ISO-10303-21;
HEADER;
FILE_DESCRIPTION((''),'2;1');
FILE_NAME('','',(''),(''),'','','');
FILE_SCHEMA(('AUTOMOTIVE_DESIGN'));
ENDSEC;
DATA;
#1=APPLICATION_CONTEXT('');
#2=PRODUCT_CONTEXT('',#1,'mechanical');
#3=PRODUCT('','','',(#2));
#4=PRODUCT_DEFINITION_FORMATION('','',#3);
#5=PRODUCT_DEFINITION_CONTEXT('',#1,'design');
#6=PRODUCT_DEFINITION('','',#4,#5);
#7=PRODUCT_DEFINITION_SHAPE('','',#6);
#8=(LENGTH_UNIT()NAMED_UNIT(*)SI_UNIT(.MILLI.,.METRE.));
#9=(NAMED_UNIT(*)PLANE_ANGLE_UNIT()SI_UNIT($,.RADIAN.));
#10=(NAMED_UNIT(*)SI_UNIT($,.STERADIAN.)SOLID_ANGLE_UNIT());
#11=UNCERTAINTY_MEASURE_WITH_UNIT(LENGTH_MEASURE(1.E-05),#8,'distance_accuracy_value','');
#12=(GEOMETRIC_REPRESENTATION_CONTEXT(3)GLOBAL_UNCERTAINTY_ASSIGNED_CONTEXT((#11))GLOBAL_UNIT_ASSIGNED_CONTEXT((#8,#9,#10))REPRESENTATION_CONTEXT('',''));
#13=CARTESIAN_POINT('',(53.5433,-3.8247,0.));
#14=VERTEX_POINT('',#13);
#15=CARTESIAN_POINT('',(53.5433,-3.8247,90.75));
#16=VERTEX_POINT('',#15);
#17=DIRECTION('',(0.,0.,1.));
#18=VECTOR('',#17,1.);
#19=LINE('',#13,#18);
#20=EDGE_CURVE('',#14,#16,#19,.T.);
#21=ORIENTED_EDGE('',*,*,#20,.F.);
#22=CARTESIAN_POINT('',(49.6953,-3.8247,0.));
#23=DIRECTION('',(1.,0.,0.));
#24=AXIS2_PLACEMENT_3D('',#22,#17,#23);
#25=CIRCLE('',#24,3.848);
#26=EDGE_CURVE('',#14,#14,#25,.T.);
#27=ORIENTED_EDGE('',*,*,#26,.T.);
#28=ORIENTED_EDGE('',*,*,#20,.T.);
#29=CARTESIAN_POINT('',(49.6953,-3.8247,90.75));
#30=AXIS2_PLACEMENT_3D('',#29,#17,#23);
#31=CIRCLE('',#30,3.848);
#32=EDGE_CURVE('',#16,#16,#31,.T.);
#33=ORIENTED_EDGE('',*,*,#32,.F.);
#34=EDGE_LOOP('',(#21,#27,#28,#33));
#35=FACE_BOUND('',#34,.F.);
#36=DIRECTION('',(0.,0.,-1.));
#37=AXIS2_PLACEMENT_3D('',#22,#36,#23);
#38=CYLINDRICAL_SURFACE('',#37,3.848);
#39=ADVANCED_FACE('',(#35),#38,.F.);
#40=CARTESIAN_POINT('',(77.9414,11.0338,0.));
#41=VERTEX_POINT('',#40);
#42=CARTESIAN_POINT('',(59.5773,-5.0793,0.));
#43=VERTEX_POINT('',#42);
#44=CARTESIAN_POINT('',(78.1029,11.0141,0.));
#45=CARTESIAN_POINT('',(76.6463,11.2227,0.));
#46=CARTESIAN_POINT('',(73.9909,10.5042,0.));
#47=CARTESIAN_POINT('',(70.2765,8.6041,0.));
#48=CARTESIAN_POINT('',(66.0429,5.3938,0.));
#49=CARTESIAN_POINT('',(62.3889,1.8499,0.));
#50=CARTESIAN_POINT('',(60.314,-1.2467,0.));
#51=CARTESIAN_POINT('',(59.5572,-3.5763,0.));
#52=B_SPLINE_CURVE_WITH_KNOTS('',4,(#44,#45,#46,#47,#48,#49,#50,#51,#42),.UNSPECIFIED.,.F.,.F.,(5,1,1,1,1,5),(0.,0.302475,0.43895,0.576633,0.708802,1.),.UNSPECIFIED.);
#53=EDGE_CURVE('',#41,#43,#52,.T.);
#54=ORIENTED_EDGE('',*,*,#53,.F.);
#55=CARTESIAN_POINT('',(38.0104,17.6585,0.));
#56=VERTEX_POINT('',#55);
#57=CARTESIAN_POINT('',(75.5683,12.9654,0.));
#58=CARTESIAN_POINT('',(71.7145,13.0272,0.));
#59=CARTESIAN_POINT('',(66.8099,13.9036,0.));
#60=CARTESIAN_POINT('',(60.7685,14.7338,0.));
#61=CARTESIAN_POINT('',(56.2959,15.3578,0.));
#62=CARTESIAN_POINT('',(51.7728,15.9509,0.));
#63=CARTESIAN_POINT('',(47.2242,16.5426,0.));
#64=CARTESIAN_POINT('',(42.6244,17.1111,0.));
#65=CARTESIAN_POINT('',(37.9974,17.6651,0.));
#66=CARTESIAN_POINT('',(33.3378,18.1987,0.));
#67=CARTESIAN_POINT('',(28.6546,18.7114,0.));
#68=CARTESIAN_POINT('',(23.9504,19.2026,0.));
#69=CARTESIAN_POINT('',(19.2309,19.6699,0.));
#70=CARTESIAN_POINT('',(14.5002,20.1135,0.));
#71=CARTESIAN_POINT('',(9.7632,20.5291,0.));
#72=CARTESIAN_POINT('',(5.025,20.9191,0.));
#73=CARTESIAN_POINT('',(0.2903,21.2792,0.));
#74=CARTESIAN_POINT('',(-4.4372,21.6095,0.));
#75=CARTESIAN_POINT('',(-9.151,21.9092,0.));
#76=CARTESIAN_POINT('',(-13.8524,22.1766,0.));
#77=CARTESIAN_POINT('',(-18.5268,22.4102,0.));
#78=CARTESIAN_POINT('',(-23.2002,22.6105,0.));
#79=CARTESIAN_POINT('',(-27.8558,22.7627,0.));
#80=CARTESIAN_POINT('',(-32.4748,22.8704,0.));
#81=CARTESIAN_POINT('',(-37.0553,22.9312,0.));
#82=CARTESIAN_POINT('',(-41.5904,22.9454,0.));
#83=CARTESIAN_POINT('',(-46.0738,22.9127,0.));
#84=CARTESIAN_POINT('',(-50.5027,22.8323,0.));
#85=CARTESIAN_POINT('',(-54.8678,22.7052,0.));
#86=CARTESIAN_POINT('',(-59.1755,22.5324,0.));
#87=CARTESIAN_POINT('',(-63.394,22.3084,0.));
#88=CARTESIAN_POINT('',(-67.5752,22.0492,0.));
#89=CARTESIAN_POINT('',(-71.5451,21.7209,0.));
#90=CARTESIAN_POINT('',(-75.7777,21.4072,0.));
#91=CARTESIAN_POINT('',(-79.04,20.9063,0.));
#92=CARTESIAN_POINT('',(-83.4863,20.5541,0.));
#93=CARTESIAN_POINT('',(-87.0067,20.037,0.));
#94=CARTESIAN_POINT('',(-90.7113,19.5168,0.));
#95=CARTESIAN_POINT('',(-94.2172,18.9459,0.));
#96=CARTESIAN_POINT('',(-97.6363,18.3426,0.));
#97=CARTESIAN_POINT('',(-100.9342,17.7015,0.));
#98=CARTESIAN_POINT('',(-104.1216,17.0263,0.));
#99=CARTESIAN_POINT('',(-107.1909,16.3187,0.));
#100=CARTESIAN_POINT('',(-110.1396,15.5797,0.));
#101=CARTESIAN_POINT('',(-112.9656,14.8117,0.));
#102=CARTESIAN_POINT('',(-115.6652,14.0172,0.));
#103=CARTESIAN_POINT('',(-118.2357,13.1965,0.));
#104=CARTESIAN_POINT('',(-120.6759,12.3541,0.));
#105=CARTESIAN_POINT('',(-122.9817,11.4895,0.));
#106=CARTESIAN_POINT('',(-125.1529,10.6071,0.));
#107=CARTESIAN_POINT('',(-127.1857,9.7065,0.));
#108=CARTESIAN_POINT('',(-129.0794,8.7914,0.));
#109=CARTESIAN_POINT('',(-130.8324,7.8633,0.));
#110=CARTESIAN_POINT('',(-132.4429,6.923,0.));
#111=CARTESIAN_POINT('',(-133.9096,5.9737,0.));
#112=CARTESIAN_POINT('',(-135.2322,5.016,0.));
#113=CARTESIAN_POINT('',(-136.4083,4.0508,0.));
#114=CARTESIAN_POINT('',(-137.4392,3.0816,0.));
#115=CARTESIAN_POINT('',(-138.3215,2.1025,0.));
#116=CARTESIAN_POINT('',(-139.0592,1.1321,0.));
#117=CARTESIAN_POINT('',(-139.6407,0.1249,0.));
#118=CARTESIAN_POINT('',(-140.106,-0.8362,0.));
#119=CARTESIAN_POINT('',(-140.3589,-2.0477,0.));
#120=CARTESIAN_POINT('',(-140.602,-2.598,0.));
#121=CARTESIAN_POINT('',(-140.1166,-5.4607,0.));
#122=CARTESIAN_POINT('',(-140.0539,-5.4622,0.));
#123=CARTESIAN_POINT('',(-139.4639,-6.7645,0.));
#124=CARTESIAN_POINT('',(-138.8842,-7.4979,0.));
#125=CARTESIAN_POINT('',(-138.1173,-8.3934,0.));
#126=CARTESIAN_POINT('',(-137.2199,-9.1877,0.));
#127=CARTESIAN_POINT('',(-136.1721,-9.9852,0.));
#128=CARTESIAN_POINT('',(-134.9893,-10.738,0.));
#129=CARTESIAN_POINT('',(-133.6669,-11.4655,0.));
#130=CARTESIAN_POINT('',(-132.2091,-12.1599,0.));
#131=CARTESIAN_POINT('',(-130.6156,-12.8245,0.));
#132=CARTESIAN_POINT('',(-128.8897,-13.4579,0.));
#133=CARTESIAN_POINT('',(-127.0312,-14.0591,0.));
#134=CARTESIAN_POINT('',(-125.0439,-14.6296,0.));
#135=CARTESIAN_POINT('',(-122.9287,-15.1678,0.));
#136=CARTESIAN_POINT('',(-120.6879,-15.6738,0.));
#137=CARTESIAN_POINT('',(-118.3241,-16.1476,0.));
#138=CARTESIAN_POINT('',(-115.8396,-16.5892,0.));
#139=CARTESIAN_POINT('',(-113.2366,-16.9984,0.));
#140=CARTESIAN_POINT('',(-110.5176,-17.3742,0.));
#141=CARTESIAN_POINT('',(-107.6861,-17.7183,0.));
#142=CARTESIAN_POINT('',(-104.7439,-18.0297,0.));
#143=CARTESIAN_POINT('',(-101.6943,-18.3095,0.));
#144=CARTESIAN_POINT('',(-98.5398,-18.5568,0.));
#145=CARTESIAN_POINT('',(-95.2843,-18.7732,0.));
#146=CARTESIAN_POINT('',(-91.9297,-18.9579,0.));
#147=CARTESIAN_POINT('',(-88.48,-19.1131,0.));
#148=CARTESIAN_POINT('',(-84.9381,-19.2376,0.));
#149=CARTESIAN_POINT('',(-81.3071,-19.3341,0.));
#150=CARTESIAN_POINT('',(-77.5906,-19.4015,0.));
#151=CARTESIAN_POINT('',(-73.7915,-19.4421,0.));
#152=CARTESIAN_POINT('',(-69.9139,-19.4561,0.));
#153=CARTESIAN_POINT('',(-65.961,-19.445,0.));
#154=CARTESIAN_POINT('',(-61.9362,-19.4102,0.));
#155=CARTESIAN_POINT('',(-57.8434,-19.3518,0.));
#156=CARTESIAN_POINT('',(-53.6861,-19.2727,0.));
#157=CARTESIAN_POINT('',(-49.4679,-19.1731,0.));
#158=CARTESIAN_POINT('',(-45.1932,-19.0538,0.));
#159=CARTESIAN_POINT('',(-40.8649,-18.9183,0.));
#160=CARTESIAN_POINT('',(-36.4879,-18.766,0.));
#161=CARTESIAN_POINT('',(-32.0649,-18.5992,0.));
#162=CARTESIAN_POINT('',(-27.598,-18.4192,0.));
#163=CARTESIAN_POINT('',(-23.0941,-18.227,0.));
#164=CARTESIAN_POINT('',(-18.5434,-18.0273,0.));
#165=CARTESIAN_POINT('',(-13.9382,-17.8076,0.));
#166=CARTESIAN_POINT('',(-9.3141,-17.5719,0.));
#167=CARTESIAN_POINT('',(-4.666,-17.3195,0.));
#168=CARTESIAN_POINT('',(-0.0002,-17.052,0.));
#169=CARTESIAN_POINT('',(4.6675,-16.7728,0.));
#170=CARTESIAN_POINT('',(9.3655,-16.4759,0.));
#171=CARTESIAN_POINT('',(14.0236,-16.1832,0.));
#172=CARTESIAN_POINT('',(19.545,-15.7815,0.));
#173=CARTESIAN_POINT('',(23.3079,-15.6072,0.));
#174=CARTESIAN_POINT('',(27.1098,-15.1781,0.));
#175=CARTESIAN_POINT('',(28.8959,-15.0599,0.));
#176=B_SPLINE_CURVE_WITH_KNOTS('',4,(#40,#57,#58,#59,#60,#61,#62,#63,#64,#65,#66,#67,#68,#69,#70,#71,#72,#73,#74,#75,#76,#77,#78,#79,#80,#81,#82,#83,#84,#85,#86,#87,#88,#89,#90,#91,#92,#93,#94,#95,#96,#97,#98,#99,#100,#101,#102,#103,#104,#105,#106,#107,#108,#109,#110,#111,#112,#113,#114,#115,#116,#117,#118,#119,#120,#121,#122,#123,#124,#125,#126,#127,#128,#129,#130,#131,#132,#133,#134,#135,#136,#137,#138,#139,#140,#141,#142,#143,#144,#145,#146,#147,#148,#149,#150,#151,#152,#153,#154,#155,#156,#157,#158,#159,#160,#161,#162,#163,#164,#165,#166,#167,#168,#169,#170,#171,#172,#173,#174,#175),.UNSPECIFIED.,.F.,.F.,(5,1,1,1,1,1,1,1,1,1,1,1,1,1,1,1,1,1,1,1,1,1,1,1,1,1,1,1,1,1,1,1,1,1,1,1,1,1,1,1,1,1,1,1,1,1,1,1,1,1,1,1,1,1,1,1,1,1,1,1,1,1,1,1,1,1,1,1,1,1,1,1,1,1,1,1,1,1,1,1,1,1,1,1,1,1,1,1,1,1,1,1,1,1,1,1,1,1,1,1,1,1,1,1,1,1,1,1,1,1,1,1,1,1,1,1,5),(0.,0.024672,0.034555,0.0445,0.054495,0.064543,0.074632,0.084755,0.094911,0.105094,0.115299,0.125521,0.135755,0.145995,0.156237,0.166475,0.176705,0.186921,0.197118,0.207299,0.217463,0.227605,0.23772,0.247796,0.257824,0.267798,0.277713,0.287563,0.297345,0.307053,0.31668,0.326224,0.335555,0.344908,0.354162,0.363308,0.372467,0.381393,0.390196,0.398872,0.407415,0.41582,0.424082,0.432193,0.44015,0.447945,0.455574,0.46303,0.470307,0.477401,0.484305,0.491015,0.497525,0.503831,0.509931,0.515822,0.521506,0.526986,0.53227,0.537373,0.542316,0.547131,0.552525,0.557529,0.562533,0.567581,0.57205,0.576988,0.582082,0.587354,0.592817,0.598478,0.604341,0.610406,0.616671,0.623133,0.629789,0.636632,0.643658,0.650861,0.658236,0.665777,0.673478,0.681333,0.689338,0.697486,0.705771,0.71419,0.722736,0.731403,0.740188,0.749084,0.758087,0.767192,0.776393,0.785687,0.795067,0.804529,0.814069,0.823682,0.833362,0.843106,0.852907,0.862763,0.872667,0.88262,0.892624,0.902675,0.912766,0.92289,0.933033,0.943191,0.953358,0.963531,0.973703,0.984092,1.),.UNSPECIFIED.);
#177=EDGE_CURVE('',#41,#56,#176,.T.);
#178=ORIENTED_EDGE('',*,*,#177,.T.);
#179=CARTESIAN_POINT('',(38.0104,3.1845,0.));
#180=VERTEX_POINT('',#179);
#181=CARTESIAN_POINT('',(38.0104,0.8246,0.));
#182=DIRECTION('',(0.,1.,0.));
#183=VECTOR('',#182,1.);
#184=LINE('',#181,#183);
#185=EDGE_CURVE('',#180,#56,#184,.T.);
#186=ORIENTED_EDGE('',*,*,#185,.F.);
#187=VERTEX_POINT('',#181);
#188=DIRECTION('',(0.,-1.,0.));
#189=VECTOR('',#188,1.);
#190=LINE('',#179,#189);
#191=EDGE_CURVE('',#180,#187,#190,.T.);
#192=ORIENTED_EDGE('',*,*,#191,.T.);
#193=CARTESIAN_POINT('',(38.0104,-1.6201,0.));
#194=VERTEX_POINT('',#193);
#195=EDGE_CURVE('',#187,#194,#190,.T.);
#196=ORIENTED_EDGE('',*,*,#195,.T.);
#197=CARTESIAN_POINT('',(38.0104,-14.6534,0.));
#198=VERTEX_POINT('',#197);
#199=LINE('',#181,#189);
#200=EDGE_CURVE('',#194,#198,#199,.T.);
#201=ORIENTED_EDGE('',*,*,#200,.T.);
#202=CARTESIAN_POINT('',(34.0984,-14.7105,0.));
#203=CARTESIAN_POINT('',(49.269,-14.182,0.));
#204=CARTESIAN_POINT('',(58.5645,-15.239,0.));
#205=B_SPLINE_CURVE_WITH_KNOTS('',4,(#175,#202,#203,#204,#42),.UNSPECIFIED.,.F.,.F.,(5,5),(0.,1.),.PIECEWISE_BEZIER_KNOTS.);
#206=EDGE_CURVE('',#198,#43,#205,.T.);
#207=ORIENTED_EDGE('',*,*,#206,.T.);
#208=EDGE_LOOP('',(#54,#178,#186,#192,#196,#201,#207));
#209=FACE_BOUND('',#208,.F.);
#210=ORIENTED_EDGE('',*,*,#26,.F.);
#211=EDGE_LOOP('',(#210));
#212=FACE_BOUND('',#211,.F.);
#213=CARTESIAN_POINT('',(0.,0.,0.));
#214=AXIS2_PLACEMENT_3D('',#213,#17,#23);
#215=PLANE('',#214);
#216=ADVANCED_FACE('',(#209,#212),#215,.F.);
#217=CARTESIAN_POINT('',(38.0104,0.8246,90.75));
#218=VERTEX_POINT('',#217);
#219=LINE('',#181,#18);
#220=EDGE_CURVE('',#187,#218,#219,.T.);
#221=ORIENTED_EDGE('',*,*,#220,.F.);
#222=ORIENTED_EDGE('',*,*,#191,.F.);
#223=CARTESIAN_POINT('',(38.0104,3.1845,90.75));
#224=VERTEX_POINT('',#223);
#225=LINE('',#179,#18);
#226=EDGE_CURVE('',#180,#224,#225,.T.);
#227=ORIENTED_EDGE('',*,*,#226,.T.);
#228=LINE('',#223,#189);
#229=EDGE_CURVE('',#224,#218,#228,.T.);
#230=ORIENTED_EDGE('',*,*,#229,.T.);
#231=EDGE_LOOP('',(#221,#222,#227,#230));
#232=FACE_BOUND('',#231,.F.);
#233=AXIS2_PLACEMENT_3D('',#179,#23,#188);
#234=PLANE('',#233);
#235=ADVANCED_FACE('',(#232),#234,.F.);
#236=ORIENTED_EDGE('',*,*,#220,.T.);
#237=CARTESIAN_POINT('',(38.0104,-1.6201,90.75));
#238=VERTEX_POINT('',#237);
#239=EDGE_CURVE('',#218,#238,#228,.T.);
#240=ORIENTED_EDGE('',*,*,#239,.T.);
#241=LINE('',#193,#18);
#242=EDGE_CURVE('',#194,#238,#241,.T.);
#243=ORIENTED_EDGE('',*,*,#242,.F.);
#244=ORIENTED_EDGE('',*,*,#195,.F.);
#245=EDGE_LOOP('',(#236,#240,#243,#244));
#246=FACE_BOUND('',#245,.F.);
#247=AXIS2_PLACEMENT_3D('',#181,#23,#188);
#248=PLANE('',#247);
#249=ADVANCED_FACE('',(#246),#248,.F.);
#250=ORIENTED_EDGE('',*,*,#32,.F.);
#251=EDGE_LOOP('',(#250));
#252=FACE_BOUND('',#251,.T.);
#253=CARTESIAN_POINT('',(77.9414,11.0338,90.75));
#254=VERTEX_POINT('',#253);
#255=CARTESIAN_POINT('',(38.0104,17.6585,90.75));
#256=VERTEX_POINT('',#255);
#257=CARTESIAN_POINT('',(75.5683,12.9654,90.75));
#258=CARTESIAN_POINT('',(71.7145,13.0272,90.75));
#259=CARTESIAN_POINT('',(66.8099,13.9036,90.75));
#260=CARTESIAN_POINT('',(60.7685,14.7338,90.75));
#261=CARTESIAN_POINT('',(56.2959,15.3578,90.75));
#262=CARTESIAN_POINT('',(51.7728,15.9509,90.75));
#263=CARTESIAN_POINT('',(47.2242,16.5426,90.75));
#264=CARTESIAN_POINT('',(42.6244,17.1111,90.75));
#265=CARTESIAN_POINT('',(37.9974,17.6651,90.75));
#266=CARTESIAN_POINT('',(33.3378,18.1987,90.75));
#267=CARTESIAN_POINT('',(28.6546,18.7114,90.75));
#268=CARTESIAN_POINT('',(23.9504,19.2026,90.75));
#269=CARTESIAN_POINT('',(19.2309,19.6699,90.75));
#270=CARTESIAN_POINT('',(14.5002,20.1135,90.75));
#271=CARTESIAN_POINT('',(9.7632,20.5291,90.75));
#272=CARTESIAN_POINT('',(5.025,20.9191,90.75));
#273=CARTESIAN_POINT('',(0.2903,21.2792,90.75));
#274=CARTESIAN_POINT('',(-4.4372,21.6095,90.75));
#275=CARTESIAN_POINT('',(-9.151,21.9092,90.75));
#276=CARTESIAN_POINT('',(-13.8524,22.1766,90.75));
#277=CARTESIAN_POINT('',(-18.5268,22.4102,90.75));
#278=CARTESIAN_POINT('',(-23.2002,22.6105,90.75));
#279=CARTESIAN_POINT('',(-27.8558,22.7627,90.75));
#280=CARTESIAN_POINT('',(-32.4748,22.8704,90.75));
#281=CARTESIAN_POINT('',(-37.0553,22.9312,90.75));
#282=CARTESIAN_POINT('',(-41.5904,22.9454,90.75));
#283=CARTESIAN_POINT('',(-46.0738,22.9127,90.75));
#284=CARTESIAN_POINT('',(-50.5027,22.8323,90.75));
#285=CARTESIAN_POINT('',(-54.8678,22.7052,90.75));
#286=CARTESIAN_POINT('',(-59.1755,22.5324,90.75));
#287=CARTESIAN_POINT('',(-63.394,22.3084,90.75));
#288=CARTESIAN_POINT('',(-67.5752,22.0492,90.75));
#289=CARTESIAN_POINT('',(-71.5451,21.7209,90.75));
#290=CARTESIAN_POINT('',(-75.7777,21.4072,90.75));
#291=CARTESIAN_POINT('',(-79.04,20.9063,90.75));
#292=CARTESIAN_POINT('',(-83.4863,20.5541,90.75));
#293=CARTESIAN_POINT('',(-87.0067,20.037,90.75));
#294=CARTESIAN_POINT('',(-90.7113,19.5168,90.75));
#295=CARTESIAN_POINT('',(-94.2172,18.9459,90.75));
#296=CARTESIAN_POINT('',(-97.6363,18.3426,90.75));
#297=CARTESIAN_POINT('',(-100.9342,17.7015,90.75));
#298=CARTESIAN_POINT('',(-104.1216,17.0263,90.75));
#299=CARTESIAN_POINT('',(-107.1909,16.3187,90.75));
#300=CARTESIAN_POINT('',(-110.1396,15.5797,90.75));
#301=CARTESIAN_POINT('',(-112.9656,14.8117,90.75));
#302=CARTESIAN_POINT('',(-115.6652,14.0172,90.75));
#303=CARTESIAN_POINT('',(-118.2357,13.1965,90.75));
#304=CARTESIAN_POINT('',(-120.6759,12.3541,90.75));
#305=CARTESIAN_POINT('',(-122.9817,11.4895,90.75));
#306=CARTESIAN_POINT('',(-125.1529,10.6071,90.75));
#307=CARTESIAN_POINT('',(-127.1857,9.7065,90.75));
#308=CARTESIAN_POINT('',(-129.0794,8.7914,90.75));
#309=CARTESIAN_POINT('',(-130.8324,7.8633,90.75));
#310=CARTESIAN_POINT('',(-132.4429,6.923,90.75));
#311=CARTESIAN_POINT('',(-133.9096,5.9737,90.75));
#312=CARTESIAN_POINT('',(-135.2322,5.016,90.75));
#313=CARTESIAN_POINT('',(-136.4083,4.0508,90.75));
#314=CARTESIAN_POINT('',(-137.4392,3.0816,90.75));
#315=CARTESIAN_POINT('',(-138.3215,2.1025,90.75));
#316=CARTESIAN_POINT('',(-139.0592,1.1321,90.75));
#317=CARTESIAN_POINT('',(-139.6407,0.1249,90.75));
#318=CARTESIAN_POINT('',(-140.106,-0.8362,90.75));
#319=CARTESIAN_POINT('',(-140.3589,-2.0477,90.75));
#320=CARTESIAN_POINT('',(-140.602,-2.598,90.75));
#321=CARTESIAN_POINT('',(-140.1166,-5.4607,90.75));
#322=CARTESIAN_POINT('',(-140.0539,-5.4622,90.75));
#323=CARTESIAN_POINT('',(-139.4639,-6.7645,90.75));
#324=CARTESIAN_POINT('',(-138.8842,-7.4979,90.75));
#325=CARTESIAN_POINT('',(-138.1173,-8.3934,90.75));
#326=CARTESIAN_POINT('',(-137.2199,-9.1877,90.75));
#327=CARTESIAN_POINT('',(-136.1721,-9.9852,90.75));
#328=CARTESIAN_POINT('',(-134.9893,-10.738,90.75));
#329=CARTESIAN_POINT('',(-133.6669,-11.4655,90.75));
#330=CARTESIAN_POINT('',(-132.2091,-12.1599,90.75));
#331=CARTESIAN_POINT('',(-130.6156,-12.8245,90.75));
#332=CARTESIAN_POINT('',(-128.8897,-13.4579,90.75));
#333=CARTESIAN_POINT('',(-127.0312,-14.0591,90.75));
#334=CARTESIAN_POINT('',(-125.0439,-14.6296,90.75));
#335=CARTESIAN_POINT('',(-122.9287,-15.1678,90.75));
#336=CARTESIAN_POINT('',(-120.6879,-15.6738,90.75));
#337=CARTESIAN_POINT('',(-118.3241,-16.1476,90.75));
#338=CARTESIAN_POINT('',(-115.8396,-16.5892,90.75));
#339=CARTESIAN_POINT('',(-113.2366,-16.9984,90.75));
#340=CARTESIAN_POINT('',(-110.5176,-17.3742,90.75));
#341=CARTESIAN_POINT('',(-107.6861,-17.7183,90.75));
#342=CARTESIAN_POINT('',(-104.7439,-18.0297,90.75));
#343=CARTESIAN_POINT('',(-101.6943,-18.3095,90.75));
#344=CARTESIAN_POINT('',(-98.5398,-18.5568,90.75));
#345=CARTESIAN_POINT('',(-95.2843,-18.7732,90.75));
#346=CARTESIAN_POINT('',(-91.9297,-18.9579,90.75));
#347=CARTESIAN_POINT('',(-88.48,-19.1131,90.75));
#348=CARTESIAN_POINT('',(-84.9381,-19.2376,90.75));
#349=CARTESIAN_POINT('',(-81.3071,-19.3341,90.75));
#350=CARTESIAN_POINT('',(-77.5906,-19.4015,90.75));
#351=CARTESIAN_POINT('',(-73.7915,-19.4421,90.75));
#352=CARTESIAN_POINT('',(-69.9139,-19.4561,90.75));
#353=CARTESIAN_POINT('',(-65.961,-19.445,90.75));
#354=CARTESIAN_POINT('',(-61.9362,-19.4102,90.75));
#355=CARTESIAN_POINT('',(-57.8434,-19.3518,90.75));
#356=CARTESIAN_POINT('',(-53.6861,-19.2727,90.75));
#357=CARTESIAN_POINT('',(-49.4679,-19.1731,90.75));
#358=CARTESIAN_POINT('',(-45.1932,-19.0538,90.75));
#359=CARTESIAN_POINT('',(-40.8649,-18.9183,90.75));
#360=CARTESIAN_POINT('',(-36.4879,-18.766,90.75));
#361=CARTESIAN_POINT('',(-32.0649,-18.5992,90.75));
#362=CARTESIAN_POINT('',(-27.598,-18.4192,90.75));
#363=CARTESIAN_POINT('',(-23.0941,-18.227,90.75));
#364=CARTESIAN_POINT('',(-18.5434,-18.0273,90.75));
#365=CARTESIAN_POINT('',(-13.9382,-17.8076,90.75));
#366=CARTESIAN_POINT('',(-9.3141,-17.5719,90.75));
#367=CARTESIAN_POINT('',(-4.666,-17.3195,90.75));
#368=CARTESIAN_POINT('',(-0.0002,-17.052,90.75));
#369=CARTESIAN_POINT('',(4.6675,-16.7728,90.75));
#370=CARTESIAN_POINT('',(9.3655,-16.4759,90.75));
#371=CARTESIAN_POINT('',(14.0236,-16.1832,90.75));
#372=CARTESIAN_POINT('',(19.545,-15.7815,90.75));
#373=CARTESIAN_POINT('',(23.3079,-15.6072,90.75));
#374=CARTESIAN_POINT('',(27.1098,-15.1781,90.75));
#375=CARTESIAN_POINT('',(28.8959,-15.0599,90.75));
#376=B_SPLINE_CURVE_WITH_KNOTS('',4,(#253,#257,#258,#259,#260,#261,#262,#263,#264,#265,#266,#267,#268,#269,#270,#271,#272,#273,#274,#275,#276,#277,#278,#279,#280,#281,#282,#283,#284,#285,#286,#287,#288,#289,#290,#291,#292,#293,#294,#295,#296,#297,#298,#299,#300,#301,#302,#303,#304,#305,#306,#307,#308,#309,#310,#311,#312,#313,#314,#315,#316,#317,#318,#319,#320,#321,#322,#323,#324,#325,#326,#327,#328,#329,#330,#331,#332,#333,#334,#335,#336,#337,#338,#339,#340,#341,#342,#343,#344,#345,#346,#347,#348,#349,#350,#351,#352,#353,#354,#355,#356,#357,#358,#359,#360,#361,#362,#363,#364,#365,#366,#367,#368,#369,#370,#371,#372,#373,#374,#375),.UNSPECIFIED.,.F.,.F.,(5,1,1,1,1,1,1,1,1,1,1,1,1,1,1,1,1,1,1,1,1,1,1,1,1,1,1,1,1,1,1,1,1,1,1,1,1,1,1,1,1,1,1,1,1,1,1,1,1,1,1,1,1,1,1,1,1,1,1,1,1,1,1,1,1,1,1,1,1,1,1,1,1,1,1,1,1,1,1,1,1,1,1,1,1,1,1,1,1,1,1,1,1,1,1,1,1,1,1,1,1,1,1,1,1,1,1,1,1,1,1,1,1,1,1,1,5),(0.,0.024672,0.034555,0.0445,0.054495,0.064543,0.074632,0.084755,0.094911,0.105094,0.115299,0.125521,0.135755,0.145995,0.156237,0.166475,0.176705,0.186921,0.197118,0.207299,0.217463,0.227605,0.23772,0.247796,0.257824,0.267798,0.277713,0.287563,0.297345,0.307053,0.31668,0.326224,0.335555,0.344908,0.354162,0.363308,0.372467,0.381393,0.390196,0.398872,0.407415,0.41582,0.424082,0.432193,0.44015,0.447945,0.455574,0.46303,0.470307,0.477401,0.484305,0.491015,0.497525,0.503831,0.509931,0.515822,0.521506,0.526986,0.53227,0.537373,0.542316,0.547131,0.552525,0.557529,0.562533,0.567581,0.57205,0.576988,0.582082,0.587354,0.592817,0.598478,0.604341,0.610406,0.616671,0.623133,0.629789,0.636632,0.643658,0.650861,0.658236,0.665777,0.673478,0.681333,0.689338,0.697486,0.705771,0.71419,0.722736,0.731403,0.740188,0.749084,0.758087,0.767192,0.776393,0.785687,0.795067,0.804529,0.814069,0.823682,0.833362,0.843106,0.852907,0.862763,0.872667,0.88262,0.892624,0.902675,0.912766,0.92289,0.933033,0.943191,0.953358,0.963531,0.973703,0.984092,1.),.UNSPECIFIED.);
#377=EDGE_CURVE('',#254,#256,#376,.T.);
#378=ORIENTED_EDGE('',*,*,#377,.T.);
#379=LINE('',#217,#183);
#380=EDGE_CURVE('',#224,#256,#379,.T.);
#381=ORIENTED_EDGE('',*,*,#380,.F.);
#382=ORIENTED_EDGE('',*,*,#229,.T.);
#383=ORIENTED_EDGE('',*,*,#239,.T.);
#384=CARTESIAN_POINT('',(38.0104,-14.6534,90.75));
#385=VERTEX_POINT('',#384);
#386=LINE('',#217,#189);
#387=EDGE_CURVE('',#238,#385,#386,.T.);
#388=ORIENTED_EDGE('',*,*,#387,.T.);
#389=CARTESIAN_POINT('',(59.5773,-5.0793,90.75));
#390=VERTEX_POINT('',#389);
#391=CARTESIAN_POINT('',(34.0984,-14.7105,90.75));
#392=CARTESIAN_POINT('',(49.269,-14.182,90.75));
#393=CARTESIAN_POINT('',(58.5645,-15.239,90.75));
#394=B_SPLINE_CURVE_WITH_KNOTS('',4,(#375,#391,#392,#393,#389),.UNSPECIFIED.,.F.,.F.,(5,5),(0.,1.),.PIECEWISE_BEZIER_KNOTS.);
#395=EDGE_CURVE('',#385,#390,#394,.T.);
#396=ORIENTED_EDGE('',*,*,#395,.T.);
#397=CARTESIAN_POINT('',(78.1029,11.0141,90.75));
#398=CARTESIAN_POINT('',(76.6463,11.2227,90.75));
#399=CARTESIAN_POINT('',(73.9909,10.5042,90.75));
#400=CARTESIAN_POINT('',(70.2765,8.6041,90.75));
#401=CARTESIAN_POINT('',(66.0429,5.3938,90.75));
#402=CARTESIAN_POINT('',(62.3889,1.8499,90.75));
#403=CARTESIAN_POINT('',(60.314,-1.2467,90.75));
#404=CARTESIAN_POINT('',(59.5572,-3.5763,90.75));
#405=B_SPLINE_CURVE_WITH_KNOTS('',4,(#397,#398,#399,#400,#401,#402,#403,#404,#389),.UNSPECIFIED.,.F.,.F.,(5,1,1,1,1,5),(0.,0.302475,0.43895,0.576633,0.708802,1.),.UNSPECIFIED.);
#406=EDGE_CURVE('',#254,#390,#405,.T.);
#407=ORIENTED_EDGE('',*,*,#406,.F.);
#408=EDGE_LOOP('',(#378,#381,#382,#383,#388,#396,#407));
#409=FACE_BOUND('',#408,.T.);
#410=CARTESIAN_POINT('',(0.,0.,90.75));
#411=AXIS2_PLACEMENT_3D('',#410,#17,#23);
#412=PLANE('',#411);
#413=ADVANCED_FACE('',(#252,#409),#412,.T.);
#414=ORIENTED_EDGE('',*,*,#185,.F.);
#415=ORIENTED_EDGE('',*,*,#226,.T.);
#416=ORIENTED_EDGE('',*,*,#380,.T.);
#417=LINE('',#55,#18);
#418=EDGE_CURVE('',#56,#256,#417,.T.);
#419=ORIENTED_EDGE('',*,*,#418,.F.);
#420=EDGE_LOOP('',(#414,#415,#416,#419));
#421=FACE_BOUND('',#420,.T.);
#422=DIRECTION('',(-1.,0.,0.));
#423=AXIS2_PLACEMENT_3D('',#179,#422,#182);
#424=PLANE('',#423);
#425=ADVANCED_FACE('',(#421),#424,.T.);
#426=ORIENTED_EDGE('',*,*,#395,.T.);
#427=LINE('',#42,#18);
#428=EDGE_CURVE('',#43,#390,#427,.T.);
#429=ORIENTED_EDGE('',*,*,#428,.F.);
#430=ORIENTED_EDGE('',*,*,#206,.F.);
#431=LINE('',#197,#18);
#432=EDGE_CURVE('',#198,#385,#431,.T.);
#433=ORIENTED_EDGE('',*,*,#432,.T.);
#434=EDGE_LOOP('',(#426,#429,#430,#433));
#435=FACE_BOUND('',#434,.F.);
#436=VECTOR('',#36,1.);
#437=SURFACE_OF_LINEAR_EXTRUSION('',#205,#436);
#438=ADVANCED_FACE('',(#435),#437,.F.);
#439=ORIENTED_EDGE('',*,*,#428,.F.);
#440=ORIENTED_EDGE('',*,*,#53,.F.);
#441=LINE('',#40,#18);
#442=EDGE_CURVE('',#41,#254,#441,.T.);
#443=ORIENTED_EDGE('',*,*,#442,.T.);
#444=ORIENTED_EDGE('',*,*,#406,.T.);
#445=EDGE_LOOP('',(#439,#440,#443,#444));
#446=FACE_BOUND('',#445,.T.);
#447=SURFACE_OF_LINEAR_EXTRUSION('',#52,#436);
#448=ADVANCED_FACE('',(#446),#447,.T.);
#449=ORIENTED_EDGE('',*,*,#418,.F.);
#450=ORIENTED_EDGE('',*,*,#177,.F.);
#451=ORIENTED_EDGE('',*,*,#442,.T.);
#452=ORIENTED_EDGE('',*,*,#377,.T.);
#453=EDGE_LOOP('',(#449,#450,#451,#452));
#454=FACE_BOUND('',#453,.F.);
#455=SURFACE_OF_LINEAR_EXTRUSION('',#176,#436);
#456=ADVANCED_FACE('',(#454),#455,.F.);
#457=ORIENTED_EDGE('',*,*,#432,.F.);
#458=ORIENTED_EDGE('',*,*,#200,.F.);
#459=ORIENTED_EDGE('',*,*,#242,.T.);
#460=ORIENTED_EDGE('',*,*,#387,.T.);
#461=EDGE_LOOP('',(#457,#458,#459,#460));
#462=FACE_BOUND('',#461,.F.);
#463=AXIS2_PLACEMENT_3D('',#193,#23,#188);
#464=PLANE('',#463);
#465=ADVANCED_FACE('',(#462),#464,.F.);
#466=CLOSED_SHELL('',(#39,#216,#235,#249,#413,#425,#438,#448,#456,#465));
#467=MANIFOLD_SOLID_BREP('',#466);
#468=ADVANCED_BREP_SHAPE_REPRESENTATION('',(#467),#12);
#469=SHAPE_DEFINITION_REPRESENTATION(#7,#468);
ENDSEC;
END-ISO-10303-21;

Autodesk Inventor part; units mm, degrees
ref_plane "YZ Plane" through (0, 0, 0) normal (1, 0, 0) x (0, 1, 0)
ref_plane "XZ Plane" through (0, 0, 0) normal (0, 1, 0) x (-1, 0, 0)
ref_plane "XY Plane" through (0, 0, 0) normal (0, 0, 1) x (1, 0, 0)
sketch "Sketch3" plane through (0, 0, 0) normal (0, 0, 1) x (1, 0, 0)
  line L0 (-80.5781, 0.8246) -> (-80.5781, 20.7988) construction
  circle A0 centre (-80.5781, 0.8246) radius 13.481
  line L1 (-53.7179, 12.5571) -> (-53.7179, -10.9927)
  arc A1 (-53.7179, -10.9927) -> (-51.5054, -12.9814) centre (-51.7179, -10.9927) ccw
  arc A2 (-51.5054, 14.5458) -> (-53.7179, 12.5571) centre (-51.7179, 12.5571) ccw
  line L2 (36.2229, -3.6088) -> (-51.5054, -12.9814)
  line L3 (38.0104, 3.1845) -> (38.0104, -1.6201)
  line L4 (-80.5781, 0.8246) -> (49.5525, 0.8246) construction
  circle A3 centre (49.6953, -3.8247) radius 3.848
  line L5 (59.6953, 14.884) -> (59.6953, -12.7998) construction
  spline S0 degree 4 poles (77.9414, 11.0338) (75.5683, 12.9654) (71.7145, 13.0272) (66.8099, 13.9036) (60.7685, 14.7338) (56.2959, 15.3578) (51.7728, 15.9509) (47.2242, 16.5426) (42.6244, 17.1111) (37.9974, 17.6651) (33.3378, 18.1987) (28.6546, 18.7114) (23.9504, 19.2026) (19.2309, 19.6699) (14.5002, 20.1135) (9.7632, 20.5291) (5.025, 20.9191) (0.2903, 21.2792) (-4.4372, 21.6095) (-9.151, 21.9092) (-13.8524, 22.1766) (-18.5268, 22.4102) (-23.2002, 22.6105) (-27.8558, 22.7627) (-32.4748, 22.8704) (-37.0553, 22.9312) (-41.5904, 22.9454) (-46.0738, 22.9127) (-50.5027, 22.8323) (-54.8678, 22.7052) (-59.1755, 22.5324) (-63.394, 22.3084) (-67.5752, 22.0492) (-71.5451, 21.7209) (-75.7777, 21.4072) (-79.04, 20.9063) (-83.4863, 20.5541) (-87.0067, 20.037) (-90.7113, 19.5168) (-94.2172, 18.9459) (-97.6363, 18.3426) (-100.9342, 17.7015) (-104.1216, 17.0263) (-107.1909, 16.3187) (-110.1396, 15.5797) (-112.9656, 14.8117) (-115.6652, 14.0172) (-118.2357, 13.1965) (-120.6759, 12.3541) (-122.9817, 11.4895) (-125.1529, 10.6071) (-127.1857, 9.7065) (-129.0794, 8.7914) (-130.8324, 7.8633) (-132.4429, 6.923) (-133.9096, 5.9737) (-135.2322, 5.016) (-136.4083, 4.0508) (-137.4392, 3.0816) (-138.3215, 2.1025) (-139.0592, 1.1321) (-139.6407, 0.1249) (-140.106, -0.8362) (-140.3589, -2.0477) (-140.602, -2.598) (-140.1166, -5.4607) (-140.0539, -5.4622) (-139.4639, -6.7645) (-138.8842, -7.4979) (-138.1173, -8.3934) (-137.2199, -9.1877) (-136.1721, -9.9852) (-134.9893, -10.738) (-133.6669, -11.4655) (-132.2091, -12.1599) (-130.6156, -12.8245) (-128.8897, -13.4579) (-127.0312, -14.0591) (-125.0439, -14.6296) (-122.9287, -15.1678) (-120.6879, -15.6738) (-118.3241, -16.1476) (-115.8396, -16.5892) (-113.2366, -16.9984) (-110.5176, -17.3742) (-107.6861, -17.7183) (-104.7439, -18.0297) (-101.6943, -18.3095) (-98.5398, -18.5568) (-95.2843, -18.7732) (-91.9297, -18.9579) (-88.48, -19.1131) (-84.9381, -19.2376) (-81.3071, -19.3341) (-77.5906, -19.4015) (-73.7915, -19.4421) (-69.9139, -19.4561) (-65.961, -19.445) (-61.9362, -19.4102) (-57.8434, -19.3518) (-53.6861, -19.2727) (-49.4679, -19.1731) (-45.1932, -19.0538) (-40.8649, -18.9183) (-36.4879, -18.766) (-32.0649, -18.5992) (-27.598, -18.4192) (-23.0941, -18.227) (-18.5434, -18.0273) (-13.9382, -17.8076) (-9.3141, -17.5719) (-4.666, -17.3195) (-0.0002, -17.052) (4.6675, -16.7728) (9.3655, -16.4759) (14.0236, -16.1832) (19.545, -15.7815) (23.3079, -15.6072) (27.1098, -15.1781) (28.8959, -15.0599) knots 0 0 0 0 0 0.024672 0.034555 0.0445 0.054495 0.064543 0.074632 0.084755 0.094911 0.105094 0.115299 0.125521 0.135755 0.145995 0.156237 0.166475 0.176705 0.186921 0.197118 0.207299 0.217463 0.227605 0.23772 0.247796 0.257824 0.267798 0.277713 0.287563 0.297345 0.307053 0.31668 0.326224 0.335555 0.344908 0.354162 0.363308 0.372467 0.381393 0.390196 0.398872 0.407415 0.41582 0.424082 0.432193 0.44015 0.447945 0.455574 0.46303 0.470307 0.477401 0.484305 0.491015 0.497525 0.503831 0.509931 0.515822 0.521506 0.526986 0.53227 0.537373 0.542316 0.547131 0.552525 0.557529 0.562533 0.567581 0.57205 0.576988 0.582082 0.587354 0.592817 0.598478 0.604341 0.610406 0.616671 0.623133 0.629789 0.636632 0.643658 0.650861 0.658236 0.665777 0.673478 0.681333 0.689338 0.697486 0.705771 0.71419 0.722736 0.731403 0.740188 0.749084 0.758087 0.767192 0.776393 0.785687 0.795067 0.804529 0.814069 0.823682 0.833362 0.843106 0.852907 0.862763 0.872667 0.88262 0.892624 0.902675 0.912766 0.92289 0.933033 0.943191 0.953358 0.963531 0.973703 0.984092 1 1 1 1 1
  line L6 (7.5013, -16.4763) -> (50.2906, -13.6435) construction
  arc A4 (44.8353, -17.2546) -> (13.385, -19.3367) centre (31.5327, -54.8885) ccw construction
  line L7 (159.6953, -3.8066) -> (59.6953, -3.8066) construction
  line L8 (-51.5054, 14.5458) -> (36.2229, 5.1732)
  arc A5 (36.2229, -3.6088) -> (38.0104, -1.6201) centre (36.0104, -1.6201) ccw
  arc A6 (38.0104, 3.1845) -> (36.2229, 5.1732) centre (36.0104, 3.1845) ccw
  spline S1 degree 4 poles (78.1029, 11.0141) (76.6463, 11.2227) (73.9909, 10.5042) (70.2765, 8.6041) (66.0429, 5.3938) (62.3889, 1.8499) (60.314, -1.2467) (59.5572, -3.5763) (59.5773, -5.0793) knots 0 0 0 0 0 0.302475 0.43895 0.576633 0.708802 1 1 1 1 1
  spline S2 degree 4 poles (28.8959, -15.0599) (34.0984, -14.7105) (49.269, -14.182) (58.5645, -15.239) (59.5773, -5.0793) knots 0 0 0 0 0 1 1 1 1 1
  line L9 (28.8959, -15.0599) -> (34.0984, -14.7105) construction
  line L10 (34.0984, -14.7105) -> (49.269, -14.182) construction
  line L11 (49.269, -14.182) -> (58.5645, -15.239) construction
  line L12 (58.5645, -15.239) -> (59.5773, -5.0793) construction
  line L13 (-140.4646, -2.8394) -> (159.4818, -3.8173) construction
  line L14 (-132.0856, 0.6333) -> (-132.0856, -6.3667)
  line L15 (-132.0856, -6.3667) -> (-110.3816, -12.3574)
  line L16 (-110.3816, -12.3574) -> (-104.797, -12.3574)
  line L17 (-104.797, -12.3574) -> (-104.797, -18.0156)
  line L18 (-132.0856, 0.6333) -> (-110.3816, 10.553)
  line L19 (-110.3816, 10.553) -> (-104.1736, 10.553)
  line L20 (-104.1736, 10.553) -> (-104.1736, 17.0026)
  line L21 (38.0104, 0.8246) -> (38.0104, -14.6534)
  line L22 (38.0104, 0.8246) -> (38.0104, 17.6585)
  point P0 (0, 0)
  point P1 (17.6589, 23.5628)
  point P2 (75.883, 10.8572)
  point P3 (72.8647, 9.7686)
  point P4 (69.4179, 7.8149)
  point P5 (66.0452, 5.2617)
  point P6 (63.1887, 2.4463)
  point P7 (61.1228, -0.3317)
  point P8 (59.9357, -2.8689)
  point P9 (-160.0931, -3.8671)
  point P10 (28.8959, -15.0599)
  point P11 (69.5533, 13.4647)
  point P12 (65.1899, 14.1023)
  point P13 (60.7936, 14.7318)
  point P14 (56.3207, 15.3468)
  point P15 (51.7945, 15.947)
  point P16 (47.2398, 16.5346)
  point P17 (42.6414, 17.1053)
  point P18 (33.3491, 18.1925)
  point P19 (28.6632, 18.7055)
  point P20 (23.9568, 19.1966)
  point P21 (19.2348, 19.6643)
  point P22 (14.5017, 20.1074)
  point P23 (9.7623, 20.5238)
  point P24 (5.0217, 20.9132)
  point P25 (0.2844, 21.2735)
  point P26 (-4.4451, 21.6038)
  point P27 (-9.1614, 21.9032)
  point P28 (-13.86, 22.1702)
  point P29 (-18.5361, 22.4036)
  point P30 (-23.211, 22.601)
  point P31 (-27.8721, 22.754)
  point P32 (-32.4966, 22.8611)
  point P33 (-37.0797, 22.9217)
  point P34 (-41.6169, 22.9356)
  point P35 (-46.1028, 22.9023)
  point P36 (-50.5329, 22.8216)
  point P37 (-54.9021, 22.6941)
  point P38 (-59.2065, 22.5195)
  point P39 (-63.4406, 22.2977)
  point P40 (-67.6008, 22.0302)
  point P41 (-71.6806, 21.7165)
  point P42 (-75.6814, 21.3591)
  point P43 (-79.1834, 20.9458)
  point P44 (-83.4048, 20.5095)
  point P45 (-87.1309, 20.023)
  point P46 (-90.7527, 19.494)
  point P47 (-94.2725, 18.9266)
  point P48 (-97.6845, 18.3211)
  point P49 (-100.9861, 17.6791)
  point P50 (-107.2438, 16.2934)
  point P51 (-110.1931, 15.553)
  point P52 (-113.0194, 14.7835)
  point P53 (-115.7191, 13.987)
  point P54 (-118.2898, 13.165)
  point P55 (-120.7294, 12.3201)
  point P56 (-123.0349, 11.454)
  point P57 (-125.2048, 10.569)
  point P58 (-127.2364, 9.6666)
  point P59 (-129.1282, 8.7491)
  point P60 (-130.8786, 7.8185)
  point P61 (-132.486, 6.8762)
  point P62 (-133.9488, 5.9245)
  point P63 (-135.2661, 4.9648)
  point P64 (-136.4363, 3.9987)
  point P65 (-137.4592, 3.0275)
  point P66 (-138.3336, 2.0531)
  point P67 (-139.0591, 1.0763)
  point P68 (-139.6352, 0.0983)
  point P69 (-140.0613, -0.8802)
  point P70 (-140.338, -1.8576)
  point P71 (-140.1239, -5.2398)
  point P72 (-139.9547, -5.7022)
  point P73 (-139.492, -6.6066)
  point P74 (-138.8844, -7.4823)
  point P75 (-138.1328, -8.3292)
  point P76 (-137.2384, -9.147)
  point P77 (-136.202, -9.9355)
  point P78 (-135.0249, -10.6943)
  point P79 (-133.7085, -11.4228)
  point P80 (-132.2548, -12.1206)
  point P81 (-130.6648, -12.7879)
  point P82 (-128.941, -13.4239)
  point P83 (-127.0846, -14.0282)
  point P84 (-125.0983, -14.6009)
  point P85 (-122.9839, -15.1415)
  point P86 (-120.7435, -15.6497)
  point P87 (-118.3798, -16.1256)
  point P88 (-115.8952, -16.569)
  point P89 (-113.2918, -16.9797)
  point P90 (-110.5723, -17.3574)
  point P91 (-107.74, -17.7027)
  point P92 (-101.7463, -18.2964)
  point P93 (-98.5909, -18.5451)
  point P94 (-95.3341, -18.7623)
  point P95 (-91.9783, -18.9484)
  point P96 (-88.5271, -19.1041)
  point P97 (-84.9838, -19.2298)
  point P98 (-81.3514, -19.3267)
  point P99 (-77.6332, -19.3951)
  point P100 (-73.8324, -19.4362)
  point P101 (-69.9531, -19.4509)
  point P102 (-65.9985, -19.4404)
  point P103 (-61.9719, -19.4059)
  point P104 (-57.8772, -19.3483)
  point P105 (-53.718, -19.2694)
  point P106 (-49.4979, -19.1701)
  point P107 (-45.2211, -19.0516)
  point P108 (-40.8909, -18.916)
  point P109 (-36.5118, -18.7642)
  point P110 (-32.0871, -18.5977)
  point P111 (-27.6213, -18.418)
  point P112 (-23.1183, -18.2269)
  point P113 (-18.5646, -18.0247)
  point P114 (-13.9566, -17.8054)
  point P115 (-9.3252, -17.5693)
  point P116 (-4.674, -17.317)
  point P117 (-0.0078, -17.05)
  point P118 (4.6686, -16.7695)
  point P119 (9.3513, -16.477)
  point P120 (14.0352, -16.1731)
  point P121 (18.7161, -15.8596)
  point P122 (23.3889, -15.5371)
  point P123 (78.0825, 12.164)
  point P124 (159.2574, -3.8401)
  point P125 (158.8836, -3.8779)
  point P126 (158.3607, -3.9307)
  point P127 (157.6896, -3.9985)
  point P128 (156.8706, -4.081)
  point P129 (155.9046, -4.1779)
  point P130 (154.7931, -4.2892)
  point P131 (153.5367, -4.4143)
  point P132 (152.1372, -4.5532)
  point P133 (150.5955, -4.7056)
  point P134 (148.914, -4.8712)
  point P135 (147.0936, -5.0494)
  point P136 (145.137, -5.2399)
  point P137 (143.0457, -5.4421)
  point P138 (140.8221, -5.6563)
  point P139 (138.4686, -5.8813)
  point P140 (135.9876, -6.1174)
  point P141 (133.3815, -6.3634)
  point P142 (130.6533, -6.6196)
  point P143 (127.8054, -6.8851)
  point P144 (124.8414, -7.1596)
  point P145 (121.7634, -7.4428)
  point P146 (118.5756, -7.7341)
  point P147 (115.2804, -8.0332)
  point P148 (111.8817, -8.3395)
  point P149 (108.3828, -8.6527)
  point P150 (104.787, -8.9722)
  point P151 (101.0985, -9.2974)
  point P152 (97.3206, -9.6283)
  point P153 (93.4572, -9.9643)
  point P154 (89.5122, -10.3048)
  point P155 (85.4898, -10.6492)
  point P156 (81.3936, -10.9969)
  point P157 (77.2284, -11.3479)
  point P158 (72.9975, -11.701)
  point P159 (68.7057, -12.0556)
  point P160 (64.3572, -12.4117)
  point P161 (59.9559, -12.7678)
  point P162 (55.5069, -13.1239)
  point P163 (51.0138, -13.4788)
  point P164 (46.4817, -13.8316)
  point P165 (41.9148, -14.182)
  point P166 (35.7035, -14.3277)
  point P167 (32.6946, -14.8708)
  point P168 (82.2459, 11.5043)
  point P169 (86.3364, 10.8401)
  point P170 (90.3495, 10.1732)
  point P171 (94.2816, 9.5051)
  point P172 (98.1288, 8.837)
  point P173 (101.8872, 8.171)
  point P174 (105.5538, 7.5086)
  point P175 (109.1244, 6.8507)
  point P176 (112.596, 6.1997)
  point P177 (115.9653, 5.5565)
  point P178 (119.2287, 4.9229)
  point P179 (122.3835, 4.3007)
  point P180 (125.4264, 3.6911)
  point P181 (128.3547, 3.0956)
  point P182 (131.1654, 2.5157)
  point P183 (133.8561, 1.9532)
  point P184 (136.4244, 1.4093)
  point P185 (138.8676, 0.8855)
  point P186 (141.1833, 0.383)
  point P187 (143.3697, -0.0964)
  point P188 (145.4247, -0.5518)
  point P189 (147.3462, -0.9817)
  point P190 (149.1327, -1.3852)
  point P191 (150.7821, -1.7608)
  point P192 (152.2935, -2.1073)
  point P193 (153.6651, -2.4241)
  point P194 (154.8954, -2.7103)
  point P195 (155.9838, -2.9647)
  point P196 (156.9291, -3.187)
  point P197 (157.7307, -3.376)
  point P198 (158.3871, -3.5317)
  point P199 (158.8986, -3.6529)
  dimension "d3" = 26.962
  dimension "d6" = 7.696
  dimension "d7" = 110
  dimension "d8" = 100
  dimension "d9" = 2
  dimension "d11" = 4.6493
  dimension "d25" = 7
  dimension "d26" = 3.5
  dimension "d27" = 8.379
  dimension "d28" = 30.083
  dimension "d29" = 5
  dimension "d30" = 5
  dimension "d31" = 59.8865
extrude "Extrusion3" add sketch "Sketch3" along normal blind 90.75 contours L22 S0 S1 S2 L21 L3
properties part number "4P.01.01.11-TW-v1-WingRibWFlapSingle" material "Polyurethane Foam"
